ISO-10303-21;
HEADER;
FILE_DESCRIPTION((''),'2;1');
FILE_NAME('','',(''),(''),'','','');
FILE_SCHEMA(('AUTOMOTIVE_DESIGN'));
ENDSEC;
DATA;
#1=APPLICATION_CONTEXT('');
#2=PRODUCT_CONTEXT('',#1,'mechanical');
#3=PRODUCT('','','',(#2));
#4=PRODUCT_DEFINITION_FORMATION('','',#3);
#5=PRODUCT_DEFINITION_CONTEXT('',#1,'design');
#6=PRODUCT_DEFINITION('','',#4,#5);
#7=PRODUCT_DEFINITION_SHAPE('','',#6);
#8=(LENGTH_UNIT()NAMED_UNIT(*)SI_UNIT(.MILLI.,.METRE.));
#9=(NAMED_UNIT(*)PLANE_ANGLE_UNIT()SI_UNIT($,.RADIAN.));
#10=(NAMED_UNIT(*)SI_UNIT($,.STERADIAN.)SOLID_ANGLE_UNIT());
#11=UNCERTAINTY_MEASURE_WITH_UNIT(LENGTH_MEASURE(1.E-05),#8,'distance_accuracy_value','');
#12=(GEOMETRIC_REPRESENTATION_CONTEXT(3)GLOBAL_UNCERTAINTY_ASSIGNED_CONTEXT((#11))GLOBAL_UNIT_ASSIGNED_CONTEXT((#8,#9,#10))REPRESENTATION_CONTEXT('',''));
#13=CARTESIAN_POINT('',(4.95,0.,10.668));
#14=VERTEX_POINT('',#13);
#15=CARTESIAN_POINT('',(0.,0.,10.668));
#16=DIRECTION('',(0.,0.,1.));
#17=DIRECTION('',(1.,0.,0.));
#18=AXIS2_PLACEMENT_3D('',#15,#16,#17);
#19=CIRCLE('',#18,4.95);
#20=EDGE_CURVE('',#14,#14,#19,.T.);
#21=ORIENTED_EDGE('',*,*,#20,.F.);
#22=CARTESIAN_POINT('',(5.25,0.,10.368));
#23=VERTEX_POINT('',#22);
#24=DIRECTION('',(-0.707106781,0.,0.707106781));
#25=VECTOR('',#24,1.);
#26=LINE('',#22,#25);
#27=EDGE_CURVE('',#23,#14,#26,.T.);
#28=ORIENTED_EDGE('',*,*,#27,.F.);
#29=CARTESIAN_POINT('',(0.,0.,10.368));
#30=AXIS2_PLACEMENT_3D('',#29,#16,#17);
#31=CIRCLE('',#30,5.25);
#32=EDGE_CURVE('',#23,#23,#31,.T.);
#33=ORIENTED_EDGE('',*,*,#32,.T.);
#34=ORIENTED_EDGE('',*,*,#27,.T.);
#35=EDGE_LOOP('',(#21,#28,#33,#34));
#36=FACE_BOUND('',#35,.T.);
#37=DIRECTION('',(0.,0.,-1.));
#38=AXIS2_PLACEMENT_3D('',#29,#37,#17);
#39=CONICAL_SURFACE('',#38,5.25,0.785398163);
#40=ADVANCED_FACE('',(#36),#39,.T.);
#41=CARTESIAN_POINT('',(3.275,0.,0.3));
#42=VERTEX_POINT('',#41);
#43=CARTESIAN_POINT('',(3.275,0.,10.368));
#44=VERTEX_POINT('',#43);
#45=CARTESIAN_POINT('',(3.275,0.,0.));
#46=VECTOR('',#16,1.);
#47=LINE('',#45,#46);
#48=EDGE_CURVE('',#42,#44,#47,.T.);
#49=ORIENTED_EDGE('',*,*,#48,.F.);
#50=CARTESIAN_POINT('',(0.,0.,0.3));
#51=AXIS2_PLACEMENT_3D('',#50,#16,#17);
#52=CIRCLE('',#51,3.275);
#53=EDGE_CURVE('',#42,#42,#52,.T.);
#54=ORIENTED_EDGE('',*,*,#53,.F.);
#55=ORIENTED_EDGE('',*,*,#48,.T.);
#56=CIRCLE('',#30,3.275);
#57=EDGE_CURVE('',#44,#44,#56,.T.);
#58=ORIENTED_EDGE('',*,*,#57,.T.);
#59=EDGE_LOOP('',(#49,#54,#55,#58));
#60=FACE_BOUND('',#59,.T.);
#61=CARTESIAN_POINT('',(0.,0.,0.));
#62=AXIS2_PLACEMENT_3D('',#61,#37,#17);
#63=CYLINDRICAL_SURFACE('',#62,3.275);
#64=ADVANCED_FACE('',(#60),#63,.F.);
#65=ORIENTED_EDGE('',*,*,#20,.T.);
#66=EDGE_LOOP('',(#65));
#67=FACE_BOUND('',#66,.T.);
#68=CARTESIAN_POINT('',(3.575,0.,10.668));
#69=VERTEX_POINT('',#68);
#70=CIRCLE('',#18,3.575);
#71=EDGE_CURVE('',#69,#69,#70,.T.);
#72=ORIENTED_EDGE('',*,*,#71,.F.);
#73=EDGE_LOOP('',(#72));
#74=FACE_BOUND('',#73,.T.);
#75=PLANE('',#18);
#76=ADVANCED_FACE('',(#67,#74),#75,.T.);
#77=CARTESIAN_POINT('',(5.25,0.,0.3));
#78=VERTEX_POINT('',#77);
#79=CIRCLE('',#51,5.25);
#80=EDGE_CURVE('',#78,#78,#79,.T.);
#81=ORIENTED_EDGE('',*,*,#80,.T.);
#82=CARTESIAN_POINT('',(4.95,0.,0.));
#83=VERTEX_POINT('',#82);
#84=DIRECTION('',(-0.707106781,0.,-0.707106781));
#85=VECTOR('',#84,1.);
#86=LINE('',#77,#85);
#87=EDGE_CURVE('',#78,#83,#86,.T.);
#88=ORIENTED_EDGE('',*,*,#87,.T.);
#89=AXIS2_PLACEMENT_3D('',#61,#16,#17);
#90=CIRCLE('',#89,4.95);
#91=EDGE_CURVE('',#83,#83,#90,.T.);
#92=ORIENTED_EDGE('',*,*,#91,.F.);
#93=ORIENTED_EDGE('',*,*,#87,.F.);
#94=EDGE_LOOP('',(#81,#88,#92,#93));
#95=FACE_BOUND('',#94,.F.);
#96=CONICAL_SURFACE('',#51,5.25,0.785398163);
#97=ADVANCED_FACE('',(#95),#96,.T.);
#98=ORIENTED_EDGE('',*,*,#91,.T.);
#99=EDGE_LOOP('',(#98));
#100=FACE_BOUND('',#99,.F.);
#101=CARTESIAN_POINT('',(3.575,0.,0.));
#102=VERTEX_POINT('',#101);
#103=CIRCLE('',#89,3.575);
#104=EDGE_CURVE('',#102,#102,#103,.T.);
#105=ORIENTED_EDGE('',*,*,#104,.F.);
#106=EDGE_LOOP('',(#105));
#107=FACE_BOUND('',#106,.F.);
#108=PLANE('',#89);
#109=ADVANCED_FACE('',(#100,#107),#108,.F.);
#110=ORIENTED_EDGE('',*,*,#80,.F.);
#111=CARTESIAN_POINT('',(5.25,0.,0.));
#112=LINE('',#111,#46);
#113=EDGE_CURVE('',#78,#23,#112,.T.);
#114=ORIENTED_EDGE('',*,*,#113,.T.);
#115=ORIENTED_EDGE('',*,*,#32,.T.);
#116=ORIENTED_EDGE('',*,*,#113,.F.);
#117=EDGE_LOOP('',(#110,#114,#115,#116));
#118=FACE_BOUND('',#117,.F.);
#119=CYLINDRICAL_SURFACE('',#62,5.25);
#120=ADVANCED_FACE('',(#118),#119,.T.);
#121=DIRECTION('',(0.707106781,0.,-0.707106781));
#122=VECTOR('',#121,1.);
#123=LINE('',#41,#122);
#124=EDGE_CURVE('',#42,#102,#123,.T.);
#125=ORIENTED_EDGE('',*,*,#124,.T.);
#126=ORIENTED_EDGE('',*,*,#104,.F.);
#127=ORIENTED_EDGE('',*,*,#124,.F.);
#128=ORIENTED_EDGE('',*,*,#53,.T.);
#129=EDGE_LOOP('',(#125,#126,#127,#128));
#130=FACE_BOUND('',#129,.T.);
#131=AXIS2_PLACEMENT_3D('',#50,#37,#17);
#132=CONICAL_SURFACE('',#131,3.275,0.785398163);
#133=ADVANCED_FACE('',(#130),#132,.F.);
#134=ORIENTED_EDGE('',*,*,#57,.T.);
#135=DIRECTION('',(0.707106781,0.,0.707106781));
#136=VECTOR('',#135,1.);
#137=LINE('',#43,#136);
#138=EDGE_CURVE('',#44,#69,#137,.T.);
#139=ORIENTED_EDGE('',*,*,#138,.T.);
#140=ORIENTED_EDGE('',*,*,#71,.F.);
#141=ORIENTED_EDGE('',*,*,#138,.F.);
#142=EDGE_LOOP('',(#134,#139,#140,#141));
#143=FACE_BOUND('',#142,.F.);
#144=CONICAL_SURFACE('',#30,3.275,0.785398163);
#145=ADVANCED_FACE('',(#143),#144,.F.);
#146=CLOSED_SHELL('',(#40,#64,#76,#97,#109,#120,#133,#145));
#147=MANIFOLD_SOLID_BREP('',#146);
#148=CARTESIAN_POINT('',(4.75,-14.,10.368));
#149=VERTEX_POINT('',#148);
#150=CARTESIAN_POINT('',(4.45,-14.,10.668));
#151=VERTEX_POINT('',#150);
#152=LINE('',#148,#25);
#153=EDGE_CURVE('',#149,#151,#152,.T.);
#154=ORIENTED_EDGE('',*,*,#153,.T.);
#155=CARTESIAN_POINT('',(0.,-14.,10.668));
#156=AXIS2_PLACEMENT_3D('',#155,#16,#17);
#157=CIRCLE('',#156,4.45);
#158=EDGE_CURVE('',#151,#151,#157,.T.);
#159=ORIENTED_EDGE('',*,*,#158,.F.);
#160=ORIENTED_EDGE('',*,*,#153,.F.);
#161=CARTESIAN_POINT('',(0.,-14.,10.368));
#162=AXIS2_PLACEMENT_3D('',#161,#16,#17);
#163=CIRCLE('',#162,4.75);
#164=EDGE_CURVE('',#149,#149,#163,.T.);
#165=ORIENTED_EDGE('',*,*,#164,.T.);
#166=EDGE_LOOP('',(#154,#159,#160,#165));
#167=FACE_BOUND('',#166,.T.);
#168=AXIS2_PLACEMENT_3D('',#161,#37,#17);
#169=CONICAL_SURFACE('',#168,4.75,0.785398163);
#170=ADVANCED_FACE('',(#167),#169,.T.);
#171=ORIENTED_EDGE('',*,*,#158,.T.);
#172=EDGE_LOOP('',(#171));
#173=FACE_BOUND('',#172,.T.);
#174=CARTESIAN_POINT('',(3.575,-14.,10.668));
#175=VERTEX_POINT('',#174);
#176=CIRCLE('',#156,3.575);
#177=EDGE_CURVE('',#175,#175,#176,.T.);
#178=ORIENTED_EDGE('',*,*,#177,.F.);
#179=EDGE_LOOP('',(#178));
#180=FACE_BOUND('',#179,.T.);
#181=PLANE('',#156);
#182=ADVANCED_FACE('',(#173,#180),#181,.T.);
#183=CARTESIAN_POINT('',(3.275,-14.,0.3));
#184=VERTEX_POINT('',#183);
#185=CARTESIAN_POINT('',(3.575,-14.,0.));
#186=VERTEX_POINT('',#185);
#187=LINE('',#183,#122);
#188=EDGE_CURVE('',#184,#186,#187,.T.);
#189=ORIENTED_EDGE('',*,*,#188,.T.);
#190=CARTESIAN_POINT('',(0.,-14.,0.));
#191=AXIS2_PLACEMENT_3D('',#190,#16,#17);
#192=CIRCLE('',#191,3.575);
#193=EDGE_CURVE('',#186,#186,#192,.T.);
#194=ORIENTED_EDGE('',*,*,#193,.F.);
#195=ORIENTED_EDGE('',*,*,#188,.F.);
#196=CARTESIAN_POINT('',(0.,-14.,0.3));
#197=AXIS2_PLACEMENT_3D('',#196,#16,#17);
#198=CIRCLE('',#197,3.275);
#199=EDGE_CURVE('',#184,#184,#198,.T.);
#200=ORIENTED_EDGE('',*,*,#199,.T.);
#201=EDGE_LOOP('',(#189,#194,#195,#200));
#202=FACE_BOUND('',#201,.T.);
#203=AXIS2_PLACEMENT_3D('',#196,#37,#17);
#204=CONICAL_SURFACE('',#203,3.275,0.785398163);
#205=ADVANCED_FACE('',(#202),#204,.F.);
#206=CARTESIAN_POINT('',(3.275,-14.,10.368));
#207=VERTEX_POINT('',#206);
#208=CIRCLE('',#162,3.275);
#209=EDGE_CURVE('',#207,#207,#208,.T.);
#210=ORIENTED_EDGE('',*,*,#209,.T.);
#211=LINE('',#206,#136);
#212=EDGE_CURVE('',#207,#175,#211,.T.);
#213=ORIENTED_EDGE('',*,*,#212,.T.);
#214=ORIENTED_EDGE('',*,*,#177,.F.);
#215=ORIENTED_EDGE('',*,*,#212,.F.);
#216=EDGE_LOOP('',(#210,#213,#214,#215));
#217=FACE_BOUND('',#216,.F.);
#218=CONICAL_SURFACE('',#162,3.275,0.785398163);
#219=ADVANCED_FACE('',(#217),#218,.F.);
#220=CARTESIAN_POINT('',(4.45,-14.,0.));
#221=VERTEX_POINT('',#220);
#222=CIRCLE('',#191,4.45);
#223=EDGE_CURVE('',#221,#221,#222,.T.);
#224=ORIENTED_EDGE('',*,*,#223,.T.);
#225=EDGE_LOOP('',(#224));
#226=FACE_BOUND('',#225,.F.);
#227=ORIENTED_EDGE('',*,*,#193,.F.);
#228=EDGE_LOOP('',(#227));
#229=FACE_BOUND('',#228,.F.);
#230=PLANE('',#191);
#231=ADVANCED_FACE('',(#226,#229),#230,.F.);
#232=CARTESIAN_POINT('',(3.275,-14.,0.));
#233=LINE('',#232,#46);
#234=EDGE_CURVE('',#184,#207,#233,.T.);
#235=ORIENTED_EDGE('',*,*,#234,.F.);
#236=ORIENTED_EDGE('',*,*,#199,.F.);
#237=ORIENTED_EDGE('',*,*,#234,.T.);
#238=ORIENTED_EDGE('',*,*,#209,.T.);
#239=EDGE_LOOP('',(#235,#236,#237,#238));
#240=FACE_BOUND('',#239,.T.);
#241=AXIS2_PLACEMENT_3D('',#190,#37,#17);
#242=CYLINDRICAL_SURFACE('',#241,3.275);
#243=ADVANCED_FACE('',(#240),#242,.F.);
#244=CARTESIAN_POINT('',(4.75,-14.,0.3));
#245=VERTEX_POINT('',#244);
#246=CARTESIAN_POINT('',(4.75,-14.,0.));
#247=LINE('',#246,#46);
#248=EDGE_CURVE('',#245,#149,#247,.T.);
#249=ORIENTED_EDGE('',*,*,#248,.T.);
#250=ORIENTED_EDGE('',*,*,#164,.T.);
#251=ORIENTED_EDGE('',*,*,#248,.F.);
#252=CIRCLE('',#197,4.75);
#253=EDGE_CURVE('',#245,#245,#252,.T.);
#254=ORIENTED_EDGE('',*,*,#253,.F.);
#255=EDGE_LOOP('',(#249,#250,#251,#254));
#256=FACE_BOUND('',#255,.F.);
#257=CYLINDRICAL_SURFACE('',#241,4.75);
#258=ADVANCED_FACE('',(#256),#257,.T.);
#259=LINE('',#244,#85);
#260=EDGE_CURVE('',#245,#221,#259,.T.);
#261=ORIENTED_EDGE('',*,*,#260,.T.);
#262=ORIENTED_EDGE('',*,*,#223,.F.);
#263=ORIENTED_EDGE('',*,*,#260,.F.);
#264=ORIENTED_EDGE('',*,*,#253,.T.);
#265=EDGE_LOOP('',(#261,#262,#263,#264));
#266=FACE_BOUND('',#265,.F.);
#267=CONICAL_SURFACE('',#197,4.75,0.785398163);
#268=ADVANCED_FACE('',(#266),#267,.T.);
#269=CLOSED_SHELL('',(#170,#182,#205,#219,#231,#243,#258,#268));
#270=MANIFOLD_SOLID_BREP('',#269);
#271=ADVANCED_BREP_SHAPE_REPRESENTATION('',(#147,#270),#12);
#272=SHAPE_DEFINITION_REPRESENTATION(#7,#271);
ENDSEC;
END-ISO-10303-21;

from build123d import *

# Parameters (mm, degrees)
F0_R      = 4.75
F0_R_2    = 3.275
F1_DEPTH  = 10.668
F0_R_3    = 5.25
F2_SIZE   = 0.3
F2_2_SIZE = 0.3


with BuildPart() as f1:
    # F0 (on Top) → F1 (new body)
    with BuildSketch(Plane.XY):
        with Locations((0, -14)):
            Circle(F0_R)
        with Locations((0, -14)):
            Circle(F0_R_2, mode=Mode.SUBTRACT)
    extrude(amount=F1_DEPTH)

    # F2
    f2_edges = [f1.edges().sort_by_distance(p)[0] for p in [
        (-3.275, -14, 10.668),
        (-3.275, -14, 0),
        (-4.75, -14, 0),
        (-4.75, -14, 10.668),
    ]]
    chamfer(f2_edges, length=F2_SIZE)


with BuildPart() as f1b:
    # F0 (on Top) → F1, piece 2 (new body)
    with BuildSketch(Plane.XY):
        Circle(F0_R_3)
        Circle(F0_R_2, mode=Mode.SUBTRACT)
    extrude(amount=F1_DEPTH)

    # F2#2
    f2_2_edges = [f1b.edges().sort_by_distance(p)[0] for p in [
        (-3.275, 0, 10.668),
        (-3.275, 0, 0),
        (-5.25, 0, 0),
        (-5.25, 0, 10.668),
    ]]
    chamfer(f2_2_edges, length=F2_2_SIZE)


solid = Compound([f1.part, f1b.part])
